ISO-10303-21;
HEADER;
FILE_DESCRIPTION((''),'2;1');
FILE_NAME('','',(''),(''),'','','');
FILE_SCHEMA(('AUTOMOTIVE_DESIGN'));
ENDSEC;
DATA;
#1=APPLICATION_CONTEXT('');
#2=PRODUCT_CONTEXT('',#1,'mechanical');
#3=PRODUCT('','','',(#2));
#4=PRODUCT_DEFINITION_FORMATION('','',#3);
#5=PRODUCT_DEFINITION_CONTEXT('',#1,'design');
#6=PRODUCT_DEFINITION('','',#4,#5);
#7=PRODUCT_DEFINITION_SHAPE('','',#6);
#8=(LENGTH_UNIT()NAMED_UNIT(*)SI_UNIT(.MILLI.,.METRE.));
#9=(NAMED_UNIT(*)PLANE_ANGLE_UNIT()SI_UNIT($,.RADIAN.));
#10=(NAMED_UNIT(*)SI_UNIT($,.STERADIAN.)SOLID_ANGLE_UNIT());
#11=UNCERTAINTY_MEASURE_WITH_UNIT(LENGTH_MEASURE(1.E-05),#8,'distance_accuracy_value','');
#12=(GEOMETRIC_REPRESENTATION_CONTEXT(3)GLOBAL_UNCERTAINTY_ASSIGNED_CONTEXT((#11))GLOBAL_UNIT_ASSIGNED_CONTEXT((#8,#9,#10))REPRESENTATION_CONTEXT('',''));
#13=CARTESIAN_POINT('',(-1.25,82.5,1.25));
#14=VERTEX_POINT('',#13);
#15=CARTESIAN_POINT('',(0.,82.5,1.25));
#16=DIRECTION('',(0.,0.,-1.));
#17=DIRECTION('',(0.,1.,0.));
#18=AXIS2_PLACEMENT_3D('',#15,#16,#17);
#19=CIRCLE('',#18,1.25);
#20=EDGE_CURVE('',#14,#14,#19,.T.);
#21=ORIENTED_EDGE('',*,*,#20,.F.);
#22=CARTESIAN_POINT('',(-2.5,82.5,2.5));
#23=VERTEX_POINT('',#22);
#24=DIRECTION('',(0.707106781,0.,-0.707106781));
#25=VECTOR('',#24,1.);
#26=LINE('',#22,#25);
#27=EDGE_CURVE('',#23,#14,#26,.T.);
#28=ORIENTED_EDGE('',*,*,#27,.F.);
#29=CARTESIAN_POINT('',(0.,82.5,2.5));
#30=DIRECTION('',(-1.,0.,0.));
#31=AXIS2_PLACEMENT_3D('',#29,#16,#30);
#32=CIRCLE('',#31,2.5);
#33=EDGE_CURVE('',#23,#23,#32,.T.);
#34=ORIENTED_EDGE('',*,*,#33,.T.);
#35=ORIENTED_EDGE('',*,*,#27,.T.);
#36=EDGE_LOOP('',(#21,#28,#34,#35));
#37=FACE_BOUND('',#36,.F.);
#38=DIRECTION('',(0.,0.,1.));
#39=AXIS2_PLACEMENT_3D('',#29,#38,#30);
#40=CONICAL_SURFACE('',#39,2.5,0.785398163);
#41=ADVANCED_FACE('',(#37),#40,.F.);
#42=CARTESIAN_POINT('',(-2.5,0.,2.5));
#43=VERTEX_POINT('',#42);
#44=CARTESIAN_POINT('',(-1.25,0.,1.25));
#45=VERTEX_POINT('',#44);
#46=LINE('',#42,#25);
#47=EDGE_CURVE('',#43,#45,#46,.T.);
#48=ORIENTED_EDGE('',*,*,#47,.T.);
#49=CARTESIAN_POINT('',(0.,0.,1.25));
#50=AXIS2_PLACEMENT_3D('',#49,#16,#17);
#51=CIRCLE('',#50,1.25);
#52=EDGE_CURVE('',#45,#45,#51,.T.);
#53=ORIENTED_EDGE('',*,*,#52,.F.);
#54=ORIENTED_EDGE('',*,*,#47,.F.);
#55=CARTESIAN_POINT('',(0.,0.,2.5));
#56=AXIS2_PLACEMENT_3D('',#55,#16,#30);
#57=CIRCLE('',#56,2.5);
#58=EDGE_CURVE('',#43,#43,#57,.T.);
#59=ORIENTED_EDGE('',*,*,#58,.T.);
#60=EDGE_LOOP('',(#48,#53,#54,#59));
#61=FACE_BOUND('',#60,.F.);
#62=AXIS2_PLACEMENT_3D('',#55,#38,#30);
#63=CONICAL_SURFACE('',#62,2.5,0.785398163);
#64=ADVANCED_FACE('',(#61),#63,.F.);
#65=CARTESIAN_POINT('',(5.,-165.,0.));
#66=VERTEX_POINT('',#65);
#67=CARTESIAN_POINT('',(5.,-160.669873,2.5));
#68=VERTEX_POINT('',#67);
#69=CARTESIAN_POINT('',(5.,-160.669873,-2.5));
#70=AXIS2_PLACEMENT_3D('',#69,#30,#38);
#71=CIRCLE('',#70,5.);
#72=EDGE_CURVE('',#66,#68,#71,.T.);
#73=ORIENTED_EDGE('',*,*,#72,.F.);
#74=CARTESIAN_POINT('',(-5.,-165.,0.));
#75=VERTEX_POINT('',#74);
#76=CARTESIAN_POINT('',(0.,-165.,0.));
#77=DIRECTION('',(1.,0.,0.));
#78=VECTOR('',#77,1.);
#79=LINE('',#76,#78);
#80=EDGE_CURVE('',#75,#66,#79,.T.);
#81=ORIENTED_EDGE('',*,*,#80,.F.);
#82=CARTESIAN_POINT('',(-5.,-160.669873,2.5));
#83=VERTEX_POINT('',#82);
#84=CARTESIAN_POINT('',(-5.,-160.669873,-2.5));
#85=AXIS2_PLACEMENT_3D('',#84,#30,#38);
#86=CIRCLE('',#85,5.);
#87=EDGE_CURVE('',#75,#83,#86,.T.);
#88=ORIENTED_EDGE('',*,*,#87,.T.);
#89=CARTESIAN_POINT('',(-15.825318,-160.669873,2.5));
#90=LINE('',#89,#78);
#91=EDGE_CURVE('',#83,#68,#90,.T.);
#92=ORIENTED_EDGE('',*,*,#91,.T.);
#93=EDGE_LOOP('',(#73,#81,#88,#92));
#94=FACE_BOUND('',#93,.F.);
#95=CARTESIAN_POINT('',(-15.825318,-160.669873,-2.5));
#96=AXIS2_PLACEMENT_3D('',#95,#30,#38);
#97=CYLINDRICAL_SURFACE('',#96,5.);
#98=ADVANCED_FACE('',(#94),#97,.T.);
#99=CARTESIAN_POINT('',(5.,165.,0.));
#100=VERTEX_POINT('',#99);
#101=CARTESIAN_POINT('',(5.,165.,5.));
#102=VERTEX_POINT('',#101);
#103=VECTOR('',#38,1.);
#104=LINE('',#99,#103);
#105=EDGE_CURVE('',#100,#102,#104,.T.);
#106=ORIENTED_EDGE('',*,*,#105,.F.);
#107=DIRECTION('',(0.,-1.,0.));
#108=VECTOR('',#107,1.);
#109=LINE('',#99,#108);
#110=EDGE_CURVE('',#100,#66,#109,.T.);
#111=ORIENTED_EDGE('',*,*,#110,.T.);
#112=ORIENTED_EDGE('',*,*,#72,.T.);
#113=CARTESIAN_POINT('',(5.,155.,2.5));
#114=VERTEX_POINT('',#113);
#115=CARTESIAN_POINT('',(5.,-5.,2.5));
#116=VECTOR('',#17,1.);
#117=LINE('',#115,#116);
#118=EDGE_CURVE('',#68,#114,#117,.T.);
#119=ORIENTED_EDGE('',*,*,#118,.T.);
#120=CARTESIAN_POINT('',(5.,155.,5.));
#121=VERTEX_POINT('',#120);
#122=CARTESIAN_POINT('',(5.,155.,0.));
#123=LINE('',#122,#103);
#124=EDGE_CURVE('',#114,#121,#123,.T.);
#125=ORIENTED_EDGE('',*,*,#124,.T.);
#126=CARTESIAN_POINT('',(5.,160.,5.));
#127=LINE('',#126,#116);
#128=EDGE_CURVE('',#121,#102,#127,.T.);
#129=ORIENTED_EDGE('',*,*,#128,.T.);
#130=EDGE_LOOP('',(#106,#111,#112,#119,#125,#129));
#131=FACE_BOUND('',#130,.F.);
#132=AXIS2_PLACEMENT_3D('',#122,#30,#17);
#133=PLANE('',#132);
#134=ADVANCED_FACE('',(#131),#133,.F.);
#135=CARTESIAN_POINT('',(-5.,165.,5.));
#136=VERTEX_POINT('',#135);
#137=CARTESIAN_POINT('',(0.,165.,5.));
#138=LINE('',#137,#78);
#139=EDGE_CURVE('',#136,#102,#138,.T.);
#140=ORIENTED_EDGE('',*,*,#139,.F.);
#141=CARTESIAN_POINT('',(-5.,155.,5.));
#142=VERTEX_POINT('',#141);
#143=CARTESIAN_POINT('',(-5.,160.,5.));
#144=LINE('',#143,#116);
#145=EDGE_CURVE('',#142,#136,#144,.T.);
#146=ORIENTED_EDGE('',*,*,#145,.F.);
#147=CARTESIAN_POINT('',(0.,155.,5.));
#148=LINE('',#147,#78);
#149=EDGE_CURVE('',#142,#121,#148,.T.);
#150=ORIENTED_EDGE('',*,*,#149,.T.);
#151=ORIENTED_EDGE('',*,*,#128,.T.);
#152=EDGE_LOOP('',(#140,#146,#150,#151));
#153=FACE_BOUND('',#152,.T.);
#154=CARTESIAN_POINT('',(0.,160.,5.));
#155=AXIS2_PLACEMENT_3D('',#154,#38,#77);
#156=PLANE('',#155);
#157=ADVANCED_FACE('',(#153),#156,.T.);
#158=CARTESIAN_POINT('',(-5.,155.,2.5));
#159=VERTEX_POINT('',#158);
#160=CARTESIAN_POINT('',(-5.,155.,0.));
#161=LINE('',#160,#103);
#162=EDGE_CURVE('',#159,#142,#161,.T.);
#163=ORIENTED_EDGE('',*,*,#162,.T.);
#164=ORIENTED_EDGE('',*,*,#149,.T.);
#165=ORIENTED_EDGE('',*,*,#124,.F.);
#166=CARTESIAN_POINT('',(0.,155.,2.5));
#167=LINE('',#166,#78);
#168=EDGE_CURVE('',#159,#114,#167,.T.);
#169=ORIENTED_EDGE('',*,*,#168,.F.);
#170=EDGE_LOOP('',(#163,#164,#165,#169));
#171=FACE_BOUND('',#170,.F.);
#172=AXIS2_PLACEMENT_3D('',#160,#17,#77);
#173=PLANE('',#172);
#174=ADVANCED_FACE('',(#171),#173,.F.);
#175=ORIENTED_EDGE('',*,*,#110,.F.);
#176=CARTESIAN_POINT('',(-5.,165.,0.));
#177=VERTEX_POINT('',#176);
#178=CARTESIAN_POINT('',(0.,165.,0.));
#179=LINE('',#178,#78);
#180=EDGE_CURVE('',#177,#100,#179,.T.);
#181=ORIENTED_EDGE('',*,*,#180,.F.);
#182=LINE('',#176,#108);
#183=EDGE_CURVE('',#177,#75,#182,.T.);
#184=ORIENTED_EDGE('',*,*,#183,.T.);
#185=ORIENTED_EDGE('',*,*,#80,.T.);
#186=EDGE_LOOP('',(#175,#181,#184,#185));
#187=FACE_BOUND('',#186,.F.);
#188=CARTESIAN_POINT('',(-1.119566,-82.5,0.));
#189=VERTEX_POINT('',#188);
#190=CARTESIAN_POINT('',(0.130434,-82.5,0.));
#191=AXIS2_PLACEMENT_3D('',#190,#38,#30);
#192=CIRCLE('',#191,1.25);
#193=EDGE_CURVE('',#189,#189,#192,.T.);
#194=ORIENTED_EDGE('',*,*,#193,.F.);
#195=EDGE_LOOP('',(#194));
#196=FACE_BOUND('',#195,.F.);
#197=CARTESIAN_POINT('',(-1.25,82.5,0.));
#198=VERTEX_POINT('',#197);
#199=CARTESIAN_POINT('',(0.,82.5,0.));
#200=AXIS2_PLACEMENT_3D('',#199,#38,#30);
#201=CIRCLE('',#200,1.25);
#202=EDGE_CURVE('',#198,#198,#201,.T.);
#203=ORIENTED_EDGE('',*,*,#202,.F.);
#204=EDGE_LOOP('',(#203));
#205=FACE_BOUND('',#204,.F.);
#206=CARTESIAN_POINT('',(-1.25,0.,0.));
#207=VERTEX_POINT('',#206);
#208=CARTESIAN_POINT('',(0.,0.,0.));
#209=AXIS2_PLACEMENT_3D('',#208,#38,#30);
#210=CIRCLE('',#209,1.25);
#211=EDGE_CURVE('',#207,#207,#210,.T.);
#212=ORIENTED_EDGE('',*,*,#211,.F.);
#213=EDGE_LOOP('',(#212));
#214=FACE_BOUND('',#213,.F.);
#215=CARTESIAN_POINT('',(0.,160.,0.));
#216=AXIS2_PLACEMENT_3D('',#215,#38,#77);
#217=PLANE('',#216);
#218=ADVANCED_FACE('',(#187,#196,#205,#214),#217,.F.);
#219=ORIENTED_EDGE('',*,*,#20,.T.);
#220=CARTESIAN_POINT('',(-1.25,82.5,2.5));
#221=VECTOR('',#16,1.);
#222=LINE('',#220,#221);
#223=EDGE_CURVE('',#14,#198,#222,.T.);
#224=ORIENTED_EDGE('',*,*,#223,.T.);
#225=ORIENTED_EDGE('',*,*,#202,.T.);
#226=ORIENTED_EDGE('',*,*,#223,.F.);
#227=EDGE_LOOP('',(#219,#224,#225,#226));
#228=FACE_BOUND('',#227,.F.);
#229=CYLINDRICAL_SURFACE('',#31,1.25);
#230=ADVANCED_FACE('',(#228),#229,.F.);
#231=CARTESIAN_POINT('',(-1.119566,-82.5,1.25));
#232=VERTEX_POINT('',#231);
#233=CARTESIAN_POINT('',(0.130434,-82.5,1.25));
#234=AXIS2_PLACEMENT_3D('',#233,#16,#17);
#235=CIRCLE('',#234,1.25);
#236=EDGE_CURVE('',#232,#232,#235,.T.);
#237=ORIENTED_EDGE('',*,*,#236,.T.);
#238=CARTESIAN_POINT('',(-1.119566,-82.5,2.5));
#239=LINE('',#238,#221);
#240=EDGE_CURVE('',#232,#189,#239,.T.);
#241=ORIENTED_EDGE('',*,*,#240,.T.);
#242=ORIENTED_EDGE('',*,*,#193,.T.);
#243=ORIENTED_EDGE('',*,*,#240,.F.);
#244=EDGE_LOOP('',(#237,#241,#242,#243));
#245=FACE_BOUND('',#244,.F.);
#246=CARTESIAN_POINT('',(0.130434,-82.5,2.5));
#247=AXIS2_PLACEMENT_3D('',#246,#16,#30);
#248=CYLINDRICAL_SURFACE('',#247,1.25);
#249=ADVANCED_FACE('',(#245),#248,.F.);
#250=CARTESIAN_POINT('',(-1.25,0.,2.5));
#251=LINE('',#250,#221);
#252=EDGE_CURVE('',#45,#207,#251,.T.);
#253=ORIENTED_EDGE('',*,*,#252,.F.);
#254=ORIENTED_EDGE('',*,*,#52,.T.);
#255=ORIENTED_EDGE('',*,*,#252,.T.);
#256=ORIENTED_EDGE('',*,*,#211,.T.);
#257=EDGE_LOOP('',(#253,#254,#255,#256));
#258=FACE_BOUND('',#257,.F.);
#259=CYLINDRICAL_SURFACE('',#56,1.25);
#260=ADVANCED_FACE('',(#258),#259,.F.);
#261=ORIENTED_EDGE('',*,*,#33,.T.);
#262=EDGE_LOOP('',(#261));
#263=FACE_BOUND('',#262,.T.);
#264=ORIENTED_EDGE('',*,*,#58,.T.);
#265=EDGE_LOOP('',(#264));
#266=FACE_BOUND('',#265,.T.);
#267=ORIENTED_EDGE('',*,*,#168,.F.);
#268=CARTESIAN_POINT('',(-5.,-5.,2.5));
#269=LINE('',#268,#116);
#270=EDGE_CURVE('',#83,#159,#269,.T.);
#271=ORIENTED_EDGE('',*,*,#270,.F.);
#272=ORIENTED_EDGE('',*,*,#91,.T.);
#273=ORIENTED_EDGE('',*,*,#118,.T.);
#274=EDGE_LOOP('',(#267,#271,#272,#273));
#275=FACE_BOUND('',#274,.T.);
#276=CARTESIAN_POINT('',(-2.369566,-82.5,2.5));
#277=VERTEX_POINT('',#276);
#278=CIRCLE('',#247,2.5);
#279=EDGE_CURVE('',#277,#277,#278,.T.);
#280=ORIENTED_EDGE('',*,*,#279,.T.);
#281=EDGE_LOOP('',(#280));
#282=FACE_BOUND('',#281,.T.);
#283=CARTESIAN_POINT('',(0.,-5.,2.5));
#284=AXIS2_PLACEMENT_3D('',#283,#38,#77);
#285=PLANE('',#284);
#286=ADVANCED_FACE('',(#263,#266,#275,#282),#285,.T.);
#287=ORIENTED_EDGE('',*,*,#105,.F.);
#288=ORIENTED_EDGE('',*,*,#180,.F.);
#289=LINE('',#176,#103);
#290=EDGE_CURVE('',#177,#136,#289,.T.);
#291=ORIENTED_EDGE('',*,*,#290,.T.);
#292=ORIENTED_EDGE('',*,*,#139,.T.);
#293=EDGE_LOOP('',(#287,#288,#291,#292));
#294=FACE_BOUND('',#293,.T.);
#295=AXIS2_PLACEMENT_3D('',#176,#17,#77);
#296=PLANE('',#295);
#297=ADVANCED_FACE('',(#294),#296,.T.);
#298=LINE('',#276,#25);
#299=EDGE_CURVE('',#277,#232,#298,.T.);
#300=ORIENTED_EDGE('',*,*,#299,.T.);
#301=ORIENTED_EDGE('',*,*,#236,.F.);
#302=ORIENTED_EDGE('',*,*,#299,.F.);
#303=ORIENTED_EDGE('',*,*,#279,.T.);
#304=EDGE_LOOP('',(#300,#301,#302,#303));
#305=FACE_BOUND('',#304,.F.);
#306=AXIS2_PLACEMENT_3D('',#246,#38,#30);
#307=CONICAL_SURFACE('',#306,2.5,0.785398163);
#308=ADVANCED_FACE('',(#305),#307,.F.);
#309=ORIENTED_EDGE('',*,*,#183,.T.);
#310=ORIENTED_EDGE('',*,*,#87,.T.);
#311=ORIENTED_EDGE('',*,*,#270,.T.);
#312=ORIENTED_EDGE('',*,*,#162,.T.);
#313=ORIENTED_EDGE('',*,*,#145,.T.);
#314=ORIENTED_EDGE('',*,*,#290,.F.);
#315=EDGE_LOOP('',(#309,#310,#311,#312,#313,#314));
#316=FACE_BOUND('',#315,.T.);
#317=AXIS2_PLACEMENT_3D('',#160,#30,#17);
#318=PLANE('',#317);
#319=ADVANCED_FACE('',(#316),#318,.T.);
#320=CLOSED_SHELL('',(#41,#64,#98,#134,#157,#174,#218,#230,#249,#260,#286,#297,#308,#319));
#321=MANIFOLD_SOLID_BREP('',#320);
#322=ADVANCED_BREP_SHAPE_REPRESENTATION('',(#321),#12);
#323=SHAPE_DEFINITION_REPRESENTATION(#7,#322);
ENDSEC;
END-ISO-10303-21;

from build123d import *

# Parameters (mm, degrees)
F0_W           = 10
F0_H           = 320
F1_DEPTH       = 2.5
F0_H_2         = 10
F2_DEPTH       = 5
F3_T1_DEPTH    = 31.6506350946
F5_D           = 2.5
F5_DEPTH       = 2.5
F5_CSINK_D     = 5
F5_CSINK_ANGLE = 90
F5_TIP         = 0.7510757738


# Not quite as in the source:
# - a fillet or chamfer that OpenCascade refuses, or shapes differently, is made with other operations: its cross-section is extruded or revolved along the edge and cut away or added


with BuildPart() as f1:
    # F0 (on Top) → F1 (new body)
    with BuildSketch(Plane.XY):
        with Locations((0, -5)):
            Rectangle(F0_W, F0_H)
    extrude(amount=F1_DEPTH)

    # F0 (on Top) → F2 (join)
    with BuildSketch(Plane.XY):
        with Locations((0, 160)):
            Rectangle(F0_W, F0_H_2)
    extrude(amount=F2_DEPTH)

    # F3: fillet of radius 5 on 1 edges, made by hand

    # F3_s2 → F3_t1 (cut)
    with BuildSketch(Plane.YZ.offset(-15.8253175473)):
        with BuildLine():
            ThreePointArc((-160.6698729811, 2.5), (-163.1698729811, 1.8301270189), (-165, 0))
            Line((-165, 0), (-165, 2.5))
            Line((-165, 2.5), (-160.6698729811, 2.5))
        make_face()
    extrude(amount=F3_T1_DEPTH, mode=Mode.SUBTRACT)

    # F5
    with Locations(Plane.XY.offset(2.5)):
        with Locations((0, 82.5), (0, 0), (0.1304344232, -82.5)):
            CounterSinkHole(F5_D / 2, F5_CSINK_D / 2, depth=F5_DEPTH, counter_sink_angle=F5_CSINK_ANGLE)
            with Locations((0, 0, -(F5_DEPTH + F5_TIP / 2))):  # 118° drill point
                Cone(0, F5_D / 2, F5_TIP, mode=Mode.SUBTRACT)


solid = f1.part
